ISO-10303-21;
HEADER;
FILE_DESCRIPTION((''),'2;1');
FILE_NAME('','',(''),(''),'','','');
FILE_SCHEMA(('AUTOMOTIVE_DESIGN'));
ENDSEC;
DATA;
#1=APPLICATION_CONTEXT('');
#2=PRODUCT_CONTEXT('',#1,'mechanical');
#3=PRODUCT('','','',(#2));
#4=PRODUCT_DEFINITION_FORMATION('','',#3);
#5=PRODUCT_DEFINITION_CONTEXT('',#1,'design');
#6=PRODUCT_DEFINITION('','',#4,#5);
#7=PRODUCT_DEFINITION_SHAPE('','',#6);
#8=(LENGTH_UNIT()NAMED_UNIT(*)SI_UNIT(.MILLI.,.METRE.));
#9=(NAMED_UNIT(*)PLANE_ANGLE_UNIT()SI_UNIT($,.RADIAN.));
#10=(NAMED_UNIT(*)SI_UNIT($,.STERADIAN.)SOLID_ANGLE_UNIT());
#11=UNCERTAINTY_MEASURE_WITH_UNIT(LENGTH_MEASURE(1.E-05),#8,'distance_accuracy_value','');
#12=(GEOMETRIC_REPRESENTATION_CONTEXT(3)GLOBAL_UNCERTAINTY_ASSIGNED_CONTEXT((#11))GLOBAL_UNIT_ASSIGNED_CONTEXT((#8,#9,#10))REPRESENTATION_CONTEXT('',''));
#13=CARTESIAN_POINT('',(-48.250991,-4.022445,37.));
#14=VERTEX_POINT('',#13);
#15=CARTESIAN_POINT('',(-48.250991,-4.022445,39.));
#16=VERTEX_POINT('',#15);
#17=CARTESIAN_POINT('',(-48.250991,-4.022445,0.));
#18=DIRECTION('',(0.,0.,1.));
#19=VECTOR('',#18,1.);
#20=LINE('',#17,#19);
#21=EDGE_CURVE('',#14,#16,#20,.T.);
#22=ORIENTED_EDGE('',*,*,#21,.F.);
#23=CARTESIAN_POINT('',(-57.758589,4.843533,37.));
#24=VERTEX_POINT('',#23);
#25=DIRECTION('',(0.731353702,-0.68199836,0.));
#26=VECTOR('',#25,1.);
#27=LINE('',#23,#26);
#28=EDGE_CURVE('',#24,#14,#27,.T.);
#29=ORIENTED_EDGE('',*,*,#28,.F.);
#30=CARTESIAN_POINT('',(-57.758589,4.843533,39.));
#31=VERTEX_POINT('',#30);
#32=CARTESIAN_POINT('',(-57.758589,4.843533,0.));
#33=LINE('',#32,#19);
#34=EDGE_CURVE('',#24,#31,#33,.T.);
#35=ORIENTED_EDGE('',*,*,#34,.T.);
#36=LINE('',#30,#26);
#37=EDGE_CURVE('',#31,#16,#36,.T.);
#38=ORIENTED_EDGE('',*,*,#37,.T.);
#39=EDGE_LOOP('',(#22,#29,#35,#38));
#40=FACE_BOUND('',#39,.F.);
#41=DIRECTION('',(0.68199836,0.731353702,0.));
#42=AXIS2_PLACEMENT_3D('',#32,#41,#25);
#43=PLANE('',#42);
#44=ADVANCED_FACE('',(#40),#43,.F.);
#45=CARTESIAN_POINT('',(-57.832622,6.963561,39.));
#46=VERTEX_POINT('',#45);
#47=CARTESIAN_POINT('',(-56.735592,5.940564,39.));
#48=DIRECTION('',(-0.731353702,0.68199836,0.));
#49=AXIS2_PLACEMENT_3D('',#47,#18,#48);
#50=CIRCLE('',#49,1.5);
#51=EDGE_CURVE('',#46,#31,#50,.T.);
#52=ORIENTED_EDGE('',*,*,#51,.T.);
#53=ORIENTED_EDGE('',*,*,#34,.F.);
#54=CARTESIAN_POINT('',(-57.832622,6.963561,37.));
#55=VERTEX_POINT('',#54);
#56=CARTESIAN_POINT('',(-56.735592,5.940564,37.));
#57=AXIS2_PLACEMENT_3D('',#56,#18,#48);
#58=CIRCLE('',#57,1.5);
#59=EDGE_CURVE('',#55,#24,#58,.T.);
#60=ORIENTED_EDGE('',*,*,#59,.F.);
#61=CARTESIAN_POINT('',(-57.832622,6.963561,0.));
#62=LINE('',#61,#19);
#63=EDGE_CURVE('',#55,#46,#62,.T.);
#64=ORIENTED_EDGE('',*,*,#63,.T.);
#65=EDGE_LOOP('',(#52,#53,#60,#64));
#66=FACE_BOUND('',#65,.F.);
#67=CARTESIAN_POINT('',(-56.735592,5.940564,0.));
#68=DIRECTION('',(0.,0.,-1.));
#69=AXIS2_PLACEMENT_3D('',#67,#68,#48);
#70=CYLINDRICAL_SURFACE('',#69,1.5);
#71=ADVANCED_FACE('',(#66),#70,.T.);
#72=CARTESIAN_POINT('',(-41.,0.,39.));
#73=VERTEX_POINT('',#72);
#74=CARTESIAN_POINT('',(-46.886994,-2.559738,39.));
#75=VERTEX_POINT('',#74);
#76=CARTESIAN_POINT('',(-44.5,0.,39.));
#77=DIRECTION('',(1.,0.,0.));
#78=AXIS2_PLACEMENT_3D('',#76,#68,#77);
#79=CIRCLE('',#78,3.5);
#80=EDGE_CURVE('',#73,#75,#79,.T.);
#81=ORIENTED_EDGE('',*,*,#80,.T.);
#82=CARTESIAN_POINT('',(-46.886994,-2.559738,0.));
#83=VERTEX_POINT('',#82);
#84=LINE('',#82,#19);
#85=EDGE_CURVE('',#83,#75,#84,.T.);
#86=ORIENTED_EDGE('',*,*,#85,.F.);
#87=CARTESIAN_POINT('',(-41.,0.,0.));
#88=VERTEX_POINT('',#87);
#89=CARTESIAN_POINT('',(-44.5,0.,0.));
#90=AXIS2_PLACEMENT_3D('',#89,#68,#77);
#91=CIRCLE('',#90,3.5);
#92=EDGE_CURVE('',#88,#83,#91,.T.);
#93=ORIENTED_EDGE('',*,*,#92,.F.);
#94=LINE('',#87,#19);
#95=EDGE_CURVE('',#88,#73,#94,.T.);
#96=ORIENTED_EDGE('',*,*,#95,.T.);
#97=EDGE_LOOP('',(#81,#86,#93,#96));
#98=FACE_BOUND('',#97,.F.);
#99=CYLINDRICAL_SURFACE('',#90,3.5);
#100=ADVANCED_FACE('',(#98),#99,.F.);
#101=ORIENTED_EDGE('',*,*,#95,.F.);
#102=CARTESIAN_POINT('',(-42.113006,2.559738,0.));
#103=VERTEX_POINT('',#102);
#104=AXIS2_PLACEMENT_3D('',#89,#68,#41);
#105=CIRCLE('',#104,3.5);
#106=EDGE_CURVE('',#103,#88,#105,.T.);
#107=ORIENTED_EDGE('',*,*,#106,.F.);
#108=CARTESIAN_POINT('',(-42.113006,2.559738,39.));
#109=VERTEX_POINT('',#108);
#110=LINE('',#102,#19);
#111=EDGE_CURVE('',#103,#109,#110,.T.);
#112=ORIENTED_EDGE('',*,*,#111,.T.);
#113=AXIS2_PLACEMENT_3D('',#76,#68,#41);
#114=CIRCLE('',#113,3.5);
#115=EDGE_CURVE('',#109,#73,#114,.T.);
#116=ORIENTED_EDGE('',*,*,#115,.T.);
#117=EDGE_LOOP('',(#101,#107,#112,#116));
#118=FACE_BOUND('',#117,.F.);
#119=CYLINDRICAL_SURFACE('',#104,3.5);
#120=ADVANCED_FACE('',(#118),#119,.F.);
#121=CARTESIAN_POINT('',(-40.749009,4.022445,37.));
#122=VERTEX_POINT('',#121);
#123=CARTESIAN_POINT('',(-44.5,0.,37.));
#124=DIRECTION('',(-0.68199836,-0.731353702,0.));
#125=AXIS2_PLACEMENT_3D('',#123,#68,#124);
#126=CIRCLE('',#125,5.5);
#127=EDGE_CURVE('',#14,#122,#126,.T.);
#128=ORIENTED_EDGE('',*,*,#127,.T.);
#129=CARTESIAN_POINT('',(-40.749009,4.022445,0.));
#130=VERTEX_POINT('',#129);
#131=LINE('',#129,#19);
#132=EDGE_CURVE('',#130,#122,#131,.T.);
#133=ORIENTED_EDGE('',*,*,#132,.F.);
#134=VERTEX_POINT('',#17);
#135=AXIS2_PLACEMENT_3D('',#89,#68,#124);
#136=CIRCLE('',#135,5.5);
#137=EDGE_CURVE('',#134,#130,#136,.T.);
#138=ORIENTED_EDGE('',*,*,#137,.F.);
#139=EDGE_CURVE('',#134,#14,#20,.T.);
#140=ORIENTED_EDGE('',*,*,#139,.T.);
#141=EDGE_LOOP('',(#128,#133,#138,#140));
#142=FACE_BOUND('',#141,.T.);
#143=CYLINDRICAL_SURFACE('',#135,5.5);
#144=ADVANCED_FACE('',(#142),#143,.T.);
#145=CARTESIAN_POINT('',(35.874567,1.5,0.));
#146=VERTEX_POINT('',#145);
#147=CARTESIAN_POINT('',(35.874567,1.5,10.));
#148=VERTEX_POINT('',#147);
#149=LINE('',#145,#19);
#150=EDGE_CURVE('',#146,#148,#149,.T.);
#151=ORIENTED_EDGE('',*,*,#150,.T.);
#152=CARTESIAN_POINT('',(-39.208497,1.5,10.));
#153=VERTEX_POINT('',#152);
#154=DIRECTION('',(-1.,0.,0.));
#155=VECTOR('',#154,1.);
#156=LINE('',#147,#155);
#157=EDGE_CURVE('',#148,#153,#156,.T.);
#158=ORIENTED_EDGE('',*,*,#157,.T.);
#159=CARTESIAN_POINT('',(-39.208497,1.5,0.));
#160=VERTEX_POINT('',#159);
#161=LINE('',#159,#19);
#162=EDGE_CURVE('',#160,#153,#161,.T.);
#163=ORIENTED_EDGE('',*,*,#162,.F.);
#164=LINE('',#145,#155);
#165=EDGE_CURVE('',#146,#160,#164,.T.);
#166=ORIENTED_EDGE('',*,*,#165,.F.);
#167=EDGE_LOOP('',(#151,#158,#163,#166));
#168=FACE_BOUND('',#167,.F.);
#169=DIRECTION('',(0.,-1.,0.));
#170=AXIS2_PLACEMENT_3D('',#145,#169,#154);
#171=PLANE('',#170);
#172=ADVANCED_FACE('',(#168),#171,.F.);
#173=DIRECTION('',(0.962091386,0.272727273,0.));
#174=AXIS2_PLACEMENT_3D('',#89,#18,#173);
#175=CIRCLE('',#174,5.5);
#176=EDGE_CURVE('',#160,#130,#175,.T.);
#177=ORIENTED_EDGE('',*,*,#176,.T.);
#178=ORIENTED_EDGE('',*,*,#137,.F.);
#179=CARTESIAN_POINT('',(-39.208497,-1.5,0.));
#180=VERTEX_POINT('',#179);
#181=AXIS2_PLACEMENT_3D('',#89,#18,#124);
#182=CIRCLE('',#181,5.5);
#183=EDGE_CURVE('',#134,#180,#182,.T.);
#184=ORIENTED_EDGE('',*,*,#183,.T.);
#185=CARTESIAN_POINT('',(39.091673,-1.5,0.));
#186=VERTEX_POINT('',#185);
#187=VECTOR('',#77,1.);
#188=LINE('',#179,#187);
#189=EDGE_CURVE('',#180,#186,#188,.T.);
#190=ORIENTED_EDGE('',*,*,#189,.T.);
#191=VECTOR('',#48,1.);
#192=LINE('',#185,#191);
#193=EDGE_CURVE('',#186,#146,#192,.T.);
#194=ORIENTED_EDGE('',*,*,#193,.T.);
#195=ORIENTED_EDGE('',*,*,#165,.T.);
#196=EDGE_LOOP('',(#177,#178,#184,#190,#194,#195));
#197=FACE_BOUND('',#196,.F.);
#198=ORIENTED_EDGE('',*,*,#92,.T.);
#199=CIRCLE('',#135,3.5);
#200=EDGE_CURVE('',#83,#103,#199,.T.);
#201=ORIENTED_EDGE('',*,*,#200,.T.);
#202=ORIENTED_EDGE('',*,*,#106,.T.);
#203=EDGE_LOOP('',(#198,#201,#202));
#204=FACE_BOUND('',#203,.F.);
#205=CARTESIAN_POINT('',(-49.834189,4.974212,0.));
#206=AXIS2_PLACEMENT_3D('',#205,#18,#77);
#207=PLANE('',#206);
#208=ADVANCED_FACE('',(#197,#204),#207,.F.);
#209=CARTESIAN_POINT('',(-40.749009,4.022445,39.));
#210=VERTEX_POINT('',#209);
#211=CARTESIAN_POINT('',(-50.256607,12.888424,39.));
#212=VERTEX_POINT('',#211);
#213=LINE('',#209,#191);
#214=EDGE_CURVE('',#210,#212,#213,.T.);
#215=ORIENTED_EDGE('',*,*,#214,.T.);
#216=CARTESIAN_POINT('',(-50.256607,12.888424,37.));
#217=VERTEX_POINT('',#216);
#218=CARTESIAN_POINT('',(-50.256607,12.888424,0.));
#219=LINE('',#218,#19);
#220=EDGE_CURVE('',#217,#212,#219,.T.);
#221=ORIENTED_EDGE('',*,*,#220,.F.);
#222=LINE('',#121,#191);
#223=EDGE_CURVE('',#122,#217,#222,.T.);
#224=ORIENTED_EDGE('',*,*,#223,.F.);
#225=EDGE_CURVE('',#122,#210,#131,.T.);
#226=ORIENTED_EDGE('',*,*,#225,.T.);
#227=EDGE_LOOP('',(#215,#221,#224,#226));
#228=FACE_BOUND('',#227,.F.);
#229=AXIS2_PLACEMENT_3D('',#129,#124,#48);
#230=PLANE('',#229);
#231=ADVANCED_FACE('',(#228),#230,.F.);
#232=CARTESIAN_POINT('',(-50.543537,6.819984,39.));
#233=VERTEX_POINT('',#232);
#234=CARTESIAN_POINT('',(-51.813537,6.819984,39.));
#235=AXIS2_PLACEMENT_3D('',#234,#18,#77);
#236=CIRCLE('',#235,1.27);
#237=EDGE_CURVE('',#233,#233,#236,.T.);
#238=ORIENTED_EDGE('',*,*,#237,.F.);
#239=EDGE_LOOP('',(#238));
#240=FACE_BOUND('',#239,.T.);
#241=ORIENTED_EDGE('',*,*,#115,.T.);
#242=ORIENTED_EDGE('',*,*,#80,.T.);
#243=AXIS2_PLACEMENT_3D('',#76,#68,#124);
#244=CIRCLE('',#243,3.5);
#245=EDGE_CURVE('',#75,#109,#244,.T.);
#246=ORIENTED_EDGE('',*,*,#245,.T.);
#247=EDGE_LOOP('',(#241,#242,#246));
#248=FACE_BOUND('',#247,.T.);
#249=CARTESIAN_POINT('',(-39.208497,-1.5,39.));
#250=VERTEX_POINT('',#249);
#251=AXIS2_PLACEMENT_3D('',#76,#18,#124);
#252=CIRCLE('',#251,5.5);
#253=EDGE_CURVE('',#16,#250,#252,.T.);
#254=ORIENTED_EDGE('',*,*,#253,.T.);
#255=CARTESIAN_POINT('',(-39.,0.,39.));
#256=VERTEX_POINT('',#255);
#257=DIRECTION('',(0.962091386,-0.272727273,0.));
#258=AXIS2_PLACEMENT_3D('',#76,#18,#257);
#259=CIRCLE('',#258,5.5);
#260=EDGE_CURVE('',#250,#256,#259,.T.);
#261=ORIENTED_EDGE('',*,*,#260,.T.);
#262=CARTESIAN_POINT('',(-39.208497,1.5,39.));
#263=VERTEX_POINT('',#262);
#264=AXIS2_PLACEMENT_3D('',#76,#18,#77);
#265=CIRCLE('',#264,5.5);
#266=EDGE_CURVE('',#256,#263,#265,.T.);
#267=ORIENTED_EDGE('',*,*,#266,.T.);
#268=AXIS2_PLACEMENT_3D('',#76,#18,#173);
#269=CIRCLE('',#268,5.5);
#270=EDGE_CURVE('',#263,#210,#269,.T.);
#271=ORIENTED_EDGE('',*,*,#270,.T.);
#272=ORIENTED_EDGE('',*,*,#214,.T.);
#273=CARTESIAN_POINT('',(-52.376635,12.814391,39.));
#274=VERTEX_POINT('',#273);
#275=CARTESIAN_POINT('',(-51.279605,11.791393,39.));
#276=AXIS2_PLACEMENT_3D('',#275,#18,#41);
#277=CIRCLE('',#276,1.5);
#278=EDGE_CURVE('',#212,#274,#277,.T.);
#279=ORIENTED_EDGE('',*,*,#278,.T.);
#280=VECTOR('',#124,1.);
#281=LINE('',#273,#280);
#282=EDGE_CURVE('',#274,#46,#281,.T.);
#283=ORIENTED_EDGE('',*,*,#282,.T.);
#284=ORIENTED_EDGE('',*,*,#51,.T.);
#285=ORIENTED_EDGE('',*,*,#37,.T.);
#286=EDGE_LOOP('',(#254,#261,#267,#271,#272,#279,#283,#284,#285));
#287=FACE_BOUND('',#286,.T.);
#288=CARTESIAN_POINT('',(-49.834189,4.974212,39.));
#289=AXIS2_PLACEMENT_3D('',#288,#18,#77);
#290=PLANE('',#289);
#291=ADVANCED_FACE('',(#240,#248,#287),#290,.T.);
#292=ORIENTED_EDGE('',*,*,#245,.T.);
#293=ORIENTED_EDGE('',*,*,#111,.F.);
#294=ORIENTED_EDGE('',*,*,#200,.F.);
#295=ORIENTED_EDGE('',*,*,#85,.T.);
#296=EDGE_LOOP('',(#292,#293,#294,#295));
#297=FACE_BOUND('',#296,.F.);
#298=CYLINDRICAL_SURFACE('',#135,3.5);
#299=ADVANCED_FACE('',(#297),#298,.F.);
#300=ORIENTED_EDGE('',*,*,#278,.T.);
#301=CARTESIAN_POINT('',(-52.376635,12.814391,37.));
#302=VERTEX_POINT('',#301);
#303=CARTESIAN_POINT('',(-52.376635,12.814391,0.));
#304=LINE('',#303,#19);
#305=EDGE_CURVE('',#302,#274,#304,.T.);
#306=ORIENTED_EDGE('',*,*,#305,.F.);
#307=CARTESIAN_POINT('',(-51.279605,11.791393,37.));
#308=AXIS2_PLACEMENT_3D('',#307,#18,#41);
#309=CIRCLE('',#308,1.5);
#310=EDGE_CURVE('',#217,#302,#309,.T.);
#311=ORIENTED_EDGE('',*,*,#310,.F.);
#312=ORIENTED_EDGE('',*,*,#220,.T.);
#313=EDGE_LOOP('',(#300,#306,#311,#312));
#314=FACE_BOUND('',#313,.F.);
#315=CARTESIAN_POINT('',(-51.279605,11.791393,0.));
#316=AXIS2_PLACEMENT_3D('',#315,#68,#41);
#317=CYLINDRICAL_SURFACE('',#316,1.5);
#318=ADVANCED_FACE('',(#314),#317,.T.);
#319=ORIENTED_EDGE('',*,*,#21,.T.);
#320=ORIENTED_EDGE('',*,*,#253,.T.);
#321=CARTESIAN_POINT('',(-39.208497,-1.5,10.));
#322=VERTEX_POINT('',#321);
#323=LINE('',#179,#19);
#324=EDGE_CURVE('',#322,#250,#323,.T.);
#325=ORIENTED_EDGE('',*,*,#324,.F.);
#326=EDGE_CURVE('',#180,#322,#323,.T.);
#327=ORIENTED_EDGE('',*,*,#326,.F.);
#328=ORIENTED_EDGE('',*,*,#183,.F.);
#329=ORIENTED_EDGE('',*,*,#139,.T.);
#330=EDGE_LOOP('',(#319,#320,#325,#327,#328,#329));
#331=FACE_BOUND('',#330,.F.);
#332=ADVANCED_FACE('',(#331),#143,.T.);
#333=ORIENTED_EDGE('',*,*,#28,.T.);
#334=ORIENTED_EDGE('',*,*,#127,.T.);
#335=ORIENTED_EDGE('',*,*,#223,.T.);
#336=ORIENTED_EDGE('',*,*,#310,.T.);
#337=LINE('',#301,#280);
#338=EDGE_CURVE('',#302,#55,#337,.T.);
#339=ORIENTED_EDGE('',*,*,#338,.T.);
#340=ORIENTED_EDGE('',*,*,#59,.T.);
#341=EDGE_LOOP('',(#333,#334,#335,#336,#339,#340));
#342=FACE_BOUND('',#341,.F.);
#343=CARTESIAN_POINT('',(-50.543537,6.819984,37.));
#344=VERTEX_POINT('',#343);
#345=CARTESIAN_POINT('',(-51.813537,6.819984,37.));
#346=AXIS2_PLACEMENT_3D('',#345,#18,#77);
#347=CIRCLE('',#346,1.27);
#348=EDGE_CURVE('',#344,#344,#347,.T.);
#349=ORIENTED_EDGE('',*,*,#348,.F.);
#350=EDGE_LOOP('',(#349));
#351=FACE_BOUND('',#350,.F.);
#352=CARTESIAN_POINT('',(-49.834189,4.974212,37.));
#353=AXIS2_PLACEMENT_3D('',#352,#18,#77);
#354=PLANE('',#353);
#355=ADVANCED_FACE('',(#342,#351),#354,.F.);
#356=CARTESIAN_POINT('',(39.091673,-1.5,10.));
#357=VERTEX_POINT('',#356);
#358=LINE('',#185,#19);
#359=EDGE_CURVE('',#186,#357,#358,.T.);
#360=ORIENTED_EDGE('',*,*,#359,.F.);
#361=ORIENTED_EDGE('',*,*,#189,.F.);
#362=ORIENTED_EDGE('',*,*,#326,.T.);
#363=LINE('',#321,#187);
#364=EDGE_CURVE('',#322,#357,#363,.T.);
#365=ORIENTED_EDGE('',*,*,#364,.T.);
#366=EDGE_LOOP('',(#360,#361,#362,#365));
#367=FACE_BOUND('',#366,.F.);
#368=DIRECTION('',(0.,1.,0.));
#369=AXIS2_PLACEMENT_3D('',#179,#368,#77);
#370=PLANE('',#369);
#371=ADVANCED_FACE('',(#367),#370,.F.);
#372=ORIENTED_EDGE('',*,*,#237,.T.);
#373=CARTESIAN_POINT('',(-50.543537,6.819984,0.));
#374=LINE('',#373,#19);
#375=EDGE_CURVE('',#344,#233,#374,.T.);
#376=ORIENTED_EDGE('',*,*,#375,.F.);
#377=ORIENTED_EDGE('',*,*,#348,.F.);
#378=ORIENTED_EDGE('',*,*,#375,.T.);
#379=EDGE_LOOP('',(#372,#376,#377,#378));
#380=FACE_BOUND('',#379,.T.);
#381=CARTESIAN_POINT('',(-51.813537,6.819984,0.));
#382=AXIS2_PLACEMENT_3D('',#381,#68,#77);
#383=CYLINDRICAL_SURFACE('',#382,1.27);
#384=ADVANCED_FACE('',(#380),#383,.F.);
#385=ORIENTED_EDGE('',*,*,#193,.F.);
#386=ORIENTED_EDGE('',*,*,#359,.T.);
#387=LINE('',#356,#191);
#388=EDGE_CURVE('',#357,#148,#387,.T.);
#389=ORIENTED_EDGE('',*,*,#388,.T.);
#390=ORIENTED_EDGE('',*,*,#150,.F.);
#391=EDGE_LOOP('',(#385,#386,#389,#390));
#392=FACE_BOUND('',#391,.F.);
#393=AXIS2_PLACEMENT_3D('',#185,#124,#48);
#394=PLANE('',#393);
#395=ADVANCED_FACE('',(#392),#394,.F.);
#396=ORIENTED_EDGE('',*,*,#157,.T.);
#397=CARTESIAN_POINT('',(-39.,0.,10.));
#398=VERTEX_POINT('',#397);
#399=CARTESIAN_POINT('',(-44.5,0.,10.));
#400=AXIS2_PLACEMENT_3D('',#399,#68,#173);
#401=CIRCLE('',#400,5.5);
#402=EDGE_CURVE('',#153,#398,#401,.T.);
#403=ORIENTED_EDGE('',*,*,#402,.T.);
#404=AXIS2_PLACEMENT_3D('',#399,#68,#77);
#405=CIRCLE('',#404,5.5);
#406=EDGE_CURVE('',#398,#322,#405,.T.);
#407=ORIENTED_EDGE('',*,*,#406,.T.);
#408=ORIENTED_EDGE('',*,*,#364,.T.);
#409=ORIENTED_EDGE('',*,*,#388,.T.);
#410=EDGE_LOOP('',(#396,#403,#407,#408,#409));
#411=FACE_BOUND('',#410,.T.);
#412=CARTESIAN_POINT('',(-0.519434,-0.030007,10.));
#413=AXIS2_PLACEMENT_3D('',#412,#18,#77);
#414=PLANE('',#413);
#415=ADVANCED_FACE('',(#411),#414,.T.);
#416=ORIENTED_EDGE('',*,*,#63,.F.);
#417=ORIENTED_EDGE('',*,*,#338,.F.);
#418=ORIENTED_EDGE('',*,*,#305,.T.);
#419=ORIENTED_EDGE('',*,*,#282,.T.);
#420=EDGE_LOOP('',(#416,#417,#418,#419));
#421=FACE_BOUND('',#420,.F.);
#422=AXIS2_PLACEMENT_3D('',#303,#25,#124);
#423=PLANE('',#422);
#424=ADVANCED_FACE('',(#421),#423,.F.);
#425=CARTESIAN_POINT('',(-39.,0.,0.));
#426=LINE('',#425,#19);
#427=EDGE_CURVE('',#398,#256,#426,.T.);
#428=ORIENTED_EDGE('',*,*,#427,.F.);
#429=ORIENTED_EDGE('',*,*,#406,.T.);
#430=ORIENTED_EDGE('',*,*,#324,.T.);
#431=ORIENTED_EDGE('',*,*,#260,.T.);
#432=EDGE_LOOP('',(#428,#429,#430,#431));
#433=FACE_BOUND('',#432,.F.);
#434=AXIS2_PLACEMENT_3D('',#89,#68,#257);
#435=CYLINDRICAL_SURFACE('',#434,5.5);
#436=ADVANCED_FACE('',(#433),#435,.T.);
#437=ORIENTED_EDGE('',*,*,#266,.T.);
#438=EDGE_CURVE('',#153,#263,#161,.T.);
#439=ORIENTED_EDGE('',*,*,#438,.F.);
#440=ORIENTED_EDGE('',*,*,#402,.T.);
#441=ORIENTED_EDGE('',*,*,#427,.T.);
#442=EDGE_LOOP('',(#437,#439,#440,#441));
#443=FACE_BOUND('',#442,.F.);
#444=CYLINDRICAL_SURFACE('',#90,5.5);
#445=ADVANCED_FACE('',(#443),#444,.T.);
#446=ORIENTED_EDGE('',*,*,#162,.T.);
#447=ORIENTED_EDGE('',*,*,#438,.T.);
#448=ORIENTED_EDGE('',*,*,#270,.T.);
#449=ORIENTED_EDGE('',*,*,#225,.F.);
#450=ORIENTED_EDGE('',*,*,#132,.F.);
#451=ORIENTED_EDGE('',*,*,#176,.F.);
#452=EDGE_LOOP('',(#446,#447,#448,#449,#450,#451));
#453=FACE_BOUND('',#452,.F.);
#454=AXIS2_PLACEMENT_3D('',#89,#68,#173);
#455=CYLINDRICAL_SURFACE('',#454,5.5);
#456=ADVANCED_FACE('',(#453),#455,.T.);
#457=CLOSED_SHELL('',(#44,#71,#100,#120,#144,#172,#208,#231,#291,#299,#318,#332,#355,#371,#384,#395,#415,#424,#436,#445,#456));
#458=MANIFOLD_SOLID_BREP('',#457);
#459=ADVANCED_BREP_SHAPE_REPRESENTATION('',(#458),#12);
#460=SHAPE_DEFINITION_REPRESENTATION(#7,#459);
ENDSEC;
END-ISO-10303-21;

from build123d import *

# Parameters (mm, degrees)
F1_DEPTH = 10
F2_DEPTH = 39
F3_R     = 1.27
F4_DEPTH = 39
F0_R     = 1.27
F5_DEPTH = 37


# Not quite as in the source:
# - a feature names something its author has since deleted; it is built from what else it names


with BuildPart() as f1:
    # F0 (on Top) → F1 (new body)
    with BuildSketch(Plane.XY):
        with BuildLine():
            Line((35.8745669567, 1.5), (-39.2084973779, 1.5))
            ThreePointArc((-39.2084973779, 1.5), (-39.0523737086, 0.7572105316), (-39, 0))
            ThreePointArc((-39, 0), (-39.0523737086, -0.7572105316), (-39.2084973779, -1.5))
            Line((-39.2084973779, -1.5), (39.0916730868, -1.5))
            Line((39.0916730868, -1.5), (35.8745669567, 1.5))
        make_face()
    extrude(amount=F1_DEPTH)

    # F0 (on Top) → F2 (join)
    with BuildSketch(Plane.XY):
        with BuildLine():
            ThreePointArc((-46.8869942602, -2.5597379557), (-47.0597379557, 2.3869942602), (-42.1130057398, 2.5597379557))
            Line((-42.1130057398, 2.5597379557), (-40.7490090197, 4.0224453589))
            ThreePointArc((-40.7490090197, 4.0224453589), (-48.5224453589, 3.7509909803), (-48.2509909803, -4.0224453589))
            Line((-48.2509909803, -4.0224453589), (-46.8869942602, -2.5597379557))
        make_face()
        with BuildLine():
            ThreePointArc((-42.1130057398, 2.5597379557), (-41.2902897397, 1.3956217412), (-41, 0))
            ThreePointArc((-41, 0), (-43.1043782588, -3.2097102603), (-46.8869942602, -2.5597379557))
            Line((-46.8869942602, -2.5597379557), (-48.2509909803, -4.0224453589))
            ThreePointArc((-48.2509909803, -4.0224453589), (-43.0221716349, -5.2977375665), (-39.2084973779, -1.5))
            ThreePointArc((-39.2084973779, -1.5), (-39.0523737086, -0.7572105316), (-39, 0))
            ThreePointArc((-39, 0), (-39.0523737086, 0.7572105316), (-39.2084973779, 1.5))
            ThreePointArc((-39.2084973779, 1.5), (-39.8061364224, 2.866643458), (-40.7490090197, 4.0224453589))
            Line((-40.7490090197, 4.0224453589), (-42.1130057398, 2.5597379557))
        make_face()
    extrude(amount=F2_DEPTH)

    # F3 (on face) → F4 (join)
    with BuildSketch(Plane.XY):
        with BuildLine():
            Line((-57.7585891014, 4.8435333219), (-48.2509909803, -4.0224453589))
            ThreePointArc((-48.2509909803, -4.0224453589), (-48.5224453589, 3.7509909803), (-40.7490090197, 4.0224453589))
            Line((-40.7490090197, 4.0224453589), (-50.2566071407, 12.8884240397))
            ThreePointArc((-50.2566071407, 12.8884240397), (-51.3319539259, 13.2904797278), (-52.3766352332, 12.8143910274))
            Line((-52.3766352332, 12.8143910274), (-57.8326221137, 6.9635614144))
            ThreePointArc((-57.8326221137, 6.9635614144), (-58.2346778018, 5.8882146293), (-57.7585891014, 4.8435333219))
        make_face()
        with Locations((-51.8135370162, 6.8199836006)):
            Circle(F3_R, mode=Mode.SUBTRACT)
    extrude(amount=F4_DEPTH)

    # F0 (on Top) → F5 (cut)
    with BuildSketch(Plane.XY):
        with BuildLine():
            ThreePointArc((-48.2509909803, -4.0224453589), (-48.5224453589, 3.7509909803), (-40.7490090197, 4.0224453589))
            Line((-40.7490090197, 4.0224453589), (-50.2566071407, 12.8884240397))
            ThreePointArc((-50.2566071407, 12.8884240397), (-51.3319539259, 13.2904797278), (-52.3766352332, 12.8143910274))
            Line((-52.3766352332, 12.8143910274), (-57.8326221137, 6.9635614144))
            ThreePointArc((-57.8326221137, 6.9635614144), (-58.2346778018, 5.8882146293), (-57.7585891014, 4.8435333219))
            Line((-57.7585891014, 4.8435333219), (-48.2509909803, -4.0224453589))
        make_face()
        with Locations((-51.8135370162, 6.8199836006)):
            Circle(F0_R, mode=Mode.SUBTRACT)
    extrude(amount=F5_DEPTH, mode=Mode.SUBTRACT)


solid = f1.part
